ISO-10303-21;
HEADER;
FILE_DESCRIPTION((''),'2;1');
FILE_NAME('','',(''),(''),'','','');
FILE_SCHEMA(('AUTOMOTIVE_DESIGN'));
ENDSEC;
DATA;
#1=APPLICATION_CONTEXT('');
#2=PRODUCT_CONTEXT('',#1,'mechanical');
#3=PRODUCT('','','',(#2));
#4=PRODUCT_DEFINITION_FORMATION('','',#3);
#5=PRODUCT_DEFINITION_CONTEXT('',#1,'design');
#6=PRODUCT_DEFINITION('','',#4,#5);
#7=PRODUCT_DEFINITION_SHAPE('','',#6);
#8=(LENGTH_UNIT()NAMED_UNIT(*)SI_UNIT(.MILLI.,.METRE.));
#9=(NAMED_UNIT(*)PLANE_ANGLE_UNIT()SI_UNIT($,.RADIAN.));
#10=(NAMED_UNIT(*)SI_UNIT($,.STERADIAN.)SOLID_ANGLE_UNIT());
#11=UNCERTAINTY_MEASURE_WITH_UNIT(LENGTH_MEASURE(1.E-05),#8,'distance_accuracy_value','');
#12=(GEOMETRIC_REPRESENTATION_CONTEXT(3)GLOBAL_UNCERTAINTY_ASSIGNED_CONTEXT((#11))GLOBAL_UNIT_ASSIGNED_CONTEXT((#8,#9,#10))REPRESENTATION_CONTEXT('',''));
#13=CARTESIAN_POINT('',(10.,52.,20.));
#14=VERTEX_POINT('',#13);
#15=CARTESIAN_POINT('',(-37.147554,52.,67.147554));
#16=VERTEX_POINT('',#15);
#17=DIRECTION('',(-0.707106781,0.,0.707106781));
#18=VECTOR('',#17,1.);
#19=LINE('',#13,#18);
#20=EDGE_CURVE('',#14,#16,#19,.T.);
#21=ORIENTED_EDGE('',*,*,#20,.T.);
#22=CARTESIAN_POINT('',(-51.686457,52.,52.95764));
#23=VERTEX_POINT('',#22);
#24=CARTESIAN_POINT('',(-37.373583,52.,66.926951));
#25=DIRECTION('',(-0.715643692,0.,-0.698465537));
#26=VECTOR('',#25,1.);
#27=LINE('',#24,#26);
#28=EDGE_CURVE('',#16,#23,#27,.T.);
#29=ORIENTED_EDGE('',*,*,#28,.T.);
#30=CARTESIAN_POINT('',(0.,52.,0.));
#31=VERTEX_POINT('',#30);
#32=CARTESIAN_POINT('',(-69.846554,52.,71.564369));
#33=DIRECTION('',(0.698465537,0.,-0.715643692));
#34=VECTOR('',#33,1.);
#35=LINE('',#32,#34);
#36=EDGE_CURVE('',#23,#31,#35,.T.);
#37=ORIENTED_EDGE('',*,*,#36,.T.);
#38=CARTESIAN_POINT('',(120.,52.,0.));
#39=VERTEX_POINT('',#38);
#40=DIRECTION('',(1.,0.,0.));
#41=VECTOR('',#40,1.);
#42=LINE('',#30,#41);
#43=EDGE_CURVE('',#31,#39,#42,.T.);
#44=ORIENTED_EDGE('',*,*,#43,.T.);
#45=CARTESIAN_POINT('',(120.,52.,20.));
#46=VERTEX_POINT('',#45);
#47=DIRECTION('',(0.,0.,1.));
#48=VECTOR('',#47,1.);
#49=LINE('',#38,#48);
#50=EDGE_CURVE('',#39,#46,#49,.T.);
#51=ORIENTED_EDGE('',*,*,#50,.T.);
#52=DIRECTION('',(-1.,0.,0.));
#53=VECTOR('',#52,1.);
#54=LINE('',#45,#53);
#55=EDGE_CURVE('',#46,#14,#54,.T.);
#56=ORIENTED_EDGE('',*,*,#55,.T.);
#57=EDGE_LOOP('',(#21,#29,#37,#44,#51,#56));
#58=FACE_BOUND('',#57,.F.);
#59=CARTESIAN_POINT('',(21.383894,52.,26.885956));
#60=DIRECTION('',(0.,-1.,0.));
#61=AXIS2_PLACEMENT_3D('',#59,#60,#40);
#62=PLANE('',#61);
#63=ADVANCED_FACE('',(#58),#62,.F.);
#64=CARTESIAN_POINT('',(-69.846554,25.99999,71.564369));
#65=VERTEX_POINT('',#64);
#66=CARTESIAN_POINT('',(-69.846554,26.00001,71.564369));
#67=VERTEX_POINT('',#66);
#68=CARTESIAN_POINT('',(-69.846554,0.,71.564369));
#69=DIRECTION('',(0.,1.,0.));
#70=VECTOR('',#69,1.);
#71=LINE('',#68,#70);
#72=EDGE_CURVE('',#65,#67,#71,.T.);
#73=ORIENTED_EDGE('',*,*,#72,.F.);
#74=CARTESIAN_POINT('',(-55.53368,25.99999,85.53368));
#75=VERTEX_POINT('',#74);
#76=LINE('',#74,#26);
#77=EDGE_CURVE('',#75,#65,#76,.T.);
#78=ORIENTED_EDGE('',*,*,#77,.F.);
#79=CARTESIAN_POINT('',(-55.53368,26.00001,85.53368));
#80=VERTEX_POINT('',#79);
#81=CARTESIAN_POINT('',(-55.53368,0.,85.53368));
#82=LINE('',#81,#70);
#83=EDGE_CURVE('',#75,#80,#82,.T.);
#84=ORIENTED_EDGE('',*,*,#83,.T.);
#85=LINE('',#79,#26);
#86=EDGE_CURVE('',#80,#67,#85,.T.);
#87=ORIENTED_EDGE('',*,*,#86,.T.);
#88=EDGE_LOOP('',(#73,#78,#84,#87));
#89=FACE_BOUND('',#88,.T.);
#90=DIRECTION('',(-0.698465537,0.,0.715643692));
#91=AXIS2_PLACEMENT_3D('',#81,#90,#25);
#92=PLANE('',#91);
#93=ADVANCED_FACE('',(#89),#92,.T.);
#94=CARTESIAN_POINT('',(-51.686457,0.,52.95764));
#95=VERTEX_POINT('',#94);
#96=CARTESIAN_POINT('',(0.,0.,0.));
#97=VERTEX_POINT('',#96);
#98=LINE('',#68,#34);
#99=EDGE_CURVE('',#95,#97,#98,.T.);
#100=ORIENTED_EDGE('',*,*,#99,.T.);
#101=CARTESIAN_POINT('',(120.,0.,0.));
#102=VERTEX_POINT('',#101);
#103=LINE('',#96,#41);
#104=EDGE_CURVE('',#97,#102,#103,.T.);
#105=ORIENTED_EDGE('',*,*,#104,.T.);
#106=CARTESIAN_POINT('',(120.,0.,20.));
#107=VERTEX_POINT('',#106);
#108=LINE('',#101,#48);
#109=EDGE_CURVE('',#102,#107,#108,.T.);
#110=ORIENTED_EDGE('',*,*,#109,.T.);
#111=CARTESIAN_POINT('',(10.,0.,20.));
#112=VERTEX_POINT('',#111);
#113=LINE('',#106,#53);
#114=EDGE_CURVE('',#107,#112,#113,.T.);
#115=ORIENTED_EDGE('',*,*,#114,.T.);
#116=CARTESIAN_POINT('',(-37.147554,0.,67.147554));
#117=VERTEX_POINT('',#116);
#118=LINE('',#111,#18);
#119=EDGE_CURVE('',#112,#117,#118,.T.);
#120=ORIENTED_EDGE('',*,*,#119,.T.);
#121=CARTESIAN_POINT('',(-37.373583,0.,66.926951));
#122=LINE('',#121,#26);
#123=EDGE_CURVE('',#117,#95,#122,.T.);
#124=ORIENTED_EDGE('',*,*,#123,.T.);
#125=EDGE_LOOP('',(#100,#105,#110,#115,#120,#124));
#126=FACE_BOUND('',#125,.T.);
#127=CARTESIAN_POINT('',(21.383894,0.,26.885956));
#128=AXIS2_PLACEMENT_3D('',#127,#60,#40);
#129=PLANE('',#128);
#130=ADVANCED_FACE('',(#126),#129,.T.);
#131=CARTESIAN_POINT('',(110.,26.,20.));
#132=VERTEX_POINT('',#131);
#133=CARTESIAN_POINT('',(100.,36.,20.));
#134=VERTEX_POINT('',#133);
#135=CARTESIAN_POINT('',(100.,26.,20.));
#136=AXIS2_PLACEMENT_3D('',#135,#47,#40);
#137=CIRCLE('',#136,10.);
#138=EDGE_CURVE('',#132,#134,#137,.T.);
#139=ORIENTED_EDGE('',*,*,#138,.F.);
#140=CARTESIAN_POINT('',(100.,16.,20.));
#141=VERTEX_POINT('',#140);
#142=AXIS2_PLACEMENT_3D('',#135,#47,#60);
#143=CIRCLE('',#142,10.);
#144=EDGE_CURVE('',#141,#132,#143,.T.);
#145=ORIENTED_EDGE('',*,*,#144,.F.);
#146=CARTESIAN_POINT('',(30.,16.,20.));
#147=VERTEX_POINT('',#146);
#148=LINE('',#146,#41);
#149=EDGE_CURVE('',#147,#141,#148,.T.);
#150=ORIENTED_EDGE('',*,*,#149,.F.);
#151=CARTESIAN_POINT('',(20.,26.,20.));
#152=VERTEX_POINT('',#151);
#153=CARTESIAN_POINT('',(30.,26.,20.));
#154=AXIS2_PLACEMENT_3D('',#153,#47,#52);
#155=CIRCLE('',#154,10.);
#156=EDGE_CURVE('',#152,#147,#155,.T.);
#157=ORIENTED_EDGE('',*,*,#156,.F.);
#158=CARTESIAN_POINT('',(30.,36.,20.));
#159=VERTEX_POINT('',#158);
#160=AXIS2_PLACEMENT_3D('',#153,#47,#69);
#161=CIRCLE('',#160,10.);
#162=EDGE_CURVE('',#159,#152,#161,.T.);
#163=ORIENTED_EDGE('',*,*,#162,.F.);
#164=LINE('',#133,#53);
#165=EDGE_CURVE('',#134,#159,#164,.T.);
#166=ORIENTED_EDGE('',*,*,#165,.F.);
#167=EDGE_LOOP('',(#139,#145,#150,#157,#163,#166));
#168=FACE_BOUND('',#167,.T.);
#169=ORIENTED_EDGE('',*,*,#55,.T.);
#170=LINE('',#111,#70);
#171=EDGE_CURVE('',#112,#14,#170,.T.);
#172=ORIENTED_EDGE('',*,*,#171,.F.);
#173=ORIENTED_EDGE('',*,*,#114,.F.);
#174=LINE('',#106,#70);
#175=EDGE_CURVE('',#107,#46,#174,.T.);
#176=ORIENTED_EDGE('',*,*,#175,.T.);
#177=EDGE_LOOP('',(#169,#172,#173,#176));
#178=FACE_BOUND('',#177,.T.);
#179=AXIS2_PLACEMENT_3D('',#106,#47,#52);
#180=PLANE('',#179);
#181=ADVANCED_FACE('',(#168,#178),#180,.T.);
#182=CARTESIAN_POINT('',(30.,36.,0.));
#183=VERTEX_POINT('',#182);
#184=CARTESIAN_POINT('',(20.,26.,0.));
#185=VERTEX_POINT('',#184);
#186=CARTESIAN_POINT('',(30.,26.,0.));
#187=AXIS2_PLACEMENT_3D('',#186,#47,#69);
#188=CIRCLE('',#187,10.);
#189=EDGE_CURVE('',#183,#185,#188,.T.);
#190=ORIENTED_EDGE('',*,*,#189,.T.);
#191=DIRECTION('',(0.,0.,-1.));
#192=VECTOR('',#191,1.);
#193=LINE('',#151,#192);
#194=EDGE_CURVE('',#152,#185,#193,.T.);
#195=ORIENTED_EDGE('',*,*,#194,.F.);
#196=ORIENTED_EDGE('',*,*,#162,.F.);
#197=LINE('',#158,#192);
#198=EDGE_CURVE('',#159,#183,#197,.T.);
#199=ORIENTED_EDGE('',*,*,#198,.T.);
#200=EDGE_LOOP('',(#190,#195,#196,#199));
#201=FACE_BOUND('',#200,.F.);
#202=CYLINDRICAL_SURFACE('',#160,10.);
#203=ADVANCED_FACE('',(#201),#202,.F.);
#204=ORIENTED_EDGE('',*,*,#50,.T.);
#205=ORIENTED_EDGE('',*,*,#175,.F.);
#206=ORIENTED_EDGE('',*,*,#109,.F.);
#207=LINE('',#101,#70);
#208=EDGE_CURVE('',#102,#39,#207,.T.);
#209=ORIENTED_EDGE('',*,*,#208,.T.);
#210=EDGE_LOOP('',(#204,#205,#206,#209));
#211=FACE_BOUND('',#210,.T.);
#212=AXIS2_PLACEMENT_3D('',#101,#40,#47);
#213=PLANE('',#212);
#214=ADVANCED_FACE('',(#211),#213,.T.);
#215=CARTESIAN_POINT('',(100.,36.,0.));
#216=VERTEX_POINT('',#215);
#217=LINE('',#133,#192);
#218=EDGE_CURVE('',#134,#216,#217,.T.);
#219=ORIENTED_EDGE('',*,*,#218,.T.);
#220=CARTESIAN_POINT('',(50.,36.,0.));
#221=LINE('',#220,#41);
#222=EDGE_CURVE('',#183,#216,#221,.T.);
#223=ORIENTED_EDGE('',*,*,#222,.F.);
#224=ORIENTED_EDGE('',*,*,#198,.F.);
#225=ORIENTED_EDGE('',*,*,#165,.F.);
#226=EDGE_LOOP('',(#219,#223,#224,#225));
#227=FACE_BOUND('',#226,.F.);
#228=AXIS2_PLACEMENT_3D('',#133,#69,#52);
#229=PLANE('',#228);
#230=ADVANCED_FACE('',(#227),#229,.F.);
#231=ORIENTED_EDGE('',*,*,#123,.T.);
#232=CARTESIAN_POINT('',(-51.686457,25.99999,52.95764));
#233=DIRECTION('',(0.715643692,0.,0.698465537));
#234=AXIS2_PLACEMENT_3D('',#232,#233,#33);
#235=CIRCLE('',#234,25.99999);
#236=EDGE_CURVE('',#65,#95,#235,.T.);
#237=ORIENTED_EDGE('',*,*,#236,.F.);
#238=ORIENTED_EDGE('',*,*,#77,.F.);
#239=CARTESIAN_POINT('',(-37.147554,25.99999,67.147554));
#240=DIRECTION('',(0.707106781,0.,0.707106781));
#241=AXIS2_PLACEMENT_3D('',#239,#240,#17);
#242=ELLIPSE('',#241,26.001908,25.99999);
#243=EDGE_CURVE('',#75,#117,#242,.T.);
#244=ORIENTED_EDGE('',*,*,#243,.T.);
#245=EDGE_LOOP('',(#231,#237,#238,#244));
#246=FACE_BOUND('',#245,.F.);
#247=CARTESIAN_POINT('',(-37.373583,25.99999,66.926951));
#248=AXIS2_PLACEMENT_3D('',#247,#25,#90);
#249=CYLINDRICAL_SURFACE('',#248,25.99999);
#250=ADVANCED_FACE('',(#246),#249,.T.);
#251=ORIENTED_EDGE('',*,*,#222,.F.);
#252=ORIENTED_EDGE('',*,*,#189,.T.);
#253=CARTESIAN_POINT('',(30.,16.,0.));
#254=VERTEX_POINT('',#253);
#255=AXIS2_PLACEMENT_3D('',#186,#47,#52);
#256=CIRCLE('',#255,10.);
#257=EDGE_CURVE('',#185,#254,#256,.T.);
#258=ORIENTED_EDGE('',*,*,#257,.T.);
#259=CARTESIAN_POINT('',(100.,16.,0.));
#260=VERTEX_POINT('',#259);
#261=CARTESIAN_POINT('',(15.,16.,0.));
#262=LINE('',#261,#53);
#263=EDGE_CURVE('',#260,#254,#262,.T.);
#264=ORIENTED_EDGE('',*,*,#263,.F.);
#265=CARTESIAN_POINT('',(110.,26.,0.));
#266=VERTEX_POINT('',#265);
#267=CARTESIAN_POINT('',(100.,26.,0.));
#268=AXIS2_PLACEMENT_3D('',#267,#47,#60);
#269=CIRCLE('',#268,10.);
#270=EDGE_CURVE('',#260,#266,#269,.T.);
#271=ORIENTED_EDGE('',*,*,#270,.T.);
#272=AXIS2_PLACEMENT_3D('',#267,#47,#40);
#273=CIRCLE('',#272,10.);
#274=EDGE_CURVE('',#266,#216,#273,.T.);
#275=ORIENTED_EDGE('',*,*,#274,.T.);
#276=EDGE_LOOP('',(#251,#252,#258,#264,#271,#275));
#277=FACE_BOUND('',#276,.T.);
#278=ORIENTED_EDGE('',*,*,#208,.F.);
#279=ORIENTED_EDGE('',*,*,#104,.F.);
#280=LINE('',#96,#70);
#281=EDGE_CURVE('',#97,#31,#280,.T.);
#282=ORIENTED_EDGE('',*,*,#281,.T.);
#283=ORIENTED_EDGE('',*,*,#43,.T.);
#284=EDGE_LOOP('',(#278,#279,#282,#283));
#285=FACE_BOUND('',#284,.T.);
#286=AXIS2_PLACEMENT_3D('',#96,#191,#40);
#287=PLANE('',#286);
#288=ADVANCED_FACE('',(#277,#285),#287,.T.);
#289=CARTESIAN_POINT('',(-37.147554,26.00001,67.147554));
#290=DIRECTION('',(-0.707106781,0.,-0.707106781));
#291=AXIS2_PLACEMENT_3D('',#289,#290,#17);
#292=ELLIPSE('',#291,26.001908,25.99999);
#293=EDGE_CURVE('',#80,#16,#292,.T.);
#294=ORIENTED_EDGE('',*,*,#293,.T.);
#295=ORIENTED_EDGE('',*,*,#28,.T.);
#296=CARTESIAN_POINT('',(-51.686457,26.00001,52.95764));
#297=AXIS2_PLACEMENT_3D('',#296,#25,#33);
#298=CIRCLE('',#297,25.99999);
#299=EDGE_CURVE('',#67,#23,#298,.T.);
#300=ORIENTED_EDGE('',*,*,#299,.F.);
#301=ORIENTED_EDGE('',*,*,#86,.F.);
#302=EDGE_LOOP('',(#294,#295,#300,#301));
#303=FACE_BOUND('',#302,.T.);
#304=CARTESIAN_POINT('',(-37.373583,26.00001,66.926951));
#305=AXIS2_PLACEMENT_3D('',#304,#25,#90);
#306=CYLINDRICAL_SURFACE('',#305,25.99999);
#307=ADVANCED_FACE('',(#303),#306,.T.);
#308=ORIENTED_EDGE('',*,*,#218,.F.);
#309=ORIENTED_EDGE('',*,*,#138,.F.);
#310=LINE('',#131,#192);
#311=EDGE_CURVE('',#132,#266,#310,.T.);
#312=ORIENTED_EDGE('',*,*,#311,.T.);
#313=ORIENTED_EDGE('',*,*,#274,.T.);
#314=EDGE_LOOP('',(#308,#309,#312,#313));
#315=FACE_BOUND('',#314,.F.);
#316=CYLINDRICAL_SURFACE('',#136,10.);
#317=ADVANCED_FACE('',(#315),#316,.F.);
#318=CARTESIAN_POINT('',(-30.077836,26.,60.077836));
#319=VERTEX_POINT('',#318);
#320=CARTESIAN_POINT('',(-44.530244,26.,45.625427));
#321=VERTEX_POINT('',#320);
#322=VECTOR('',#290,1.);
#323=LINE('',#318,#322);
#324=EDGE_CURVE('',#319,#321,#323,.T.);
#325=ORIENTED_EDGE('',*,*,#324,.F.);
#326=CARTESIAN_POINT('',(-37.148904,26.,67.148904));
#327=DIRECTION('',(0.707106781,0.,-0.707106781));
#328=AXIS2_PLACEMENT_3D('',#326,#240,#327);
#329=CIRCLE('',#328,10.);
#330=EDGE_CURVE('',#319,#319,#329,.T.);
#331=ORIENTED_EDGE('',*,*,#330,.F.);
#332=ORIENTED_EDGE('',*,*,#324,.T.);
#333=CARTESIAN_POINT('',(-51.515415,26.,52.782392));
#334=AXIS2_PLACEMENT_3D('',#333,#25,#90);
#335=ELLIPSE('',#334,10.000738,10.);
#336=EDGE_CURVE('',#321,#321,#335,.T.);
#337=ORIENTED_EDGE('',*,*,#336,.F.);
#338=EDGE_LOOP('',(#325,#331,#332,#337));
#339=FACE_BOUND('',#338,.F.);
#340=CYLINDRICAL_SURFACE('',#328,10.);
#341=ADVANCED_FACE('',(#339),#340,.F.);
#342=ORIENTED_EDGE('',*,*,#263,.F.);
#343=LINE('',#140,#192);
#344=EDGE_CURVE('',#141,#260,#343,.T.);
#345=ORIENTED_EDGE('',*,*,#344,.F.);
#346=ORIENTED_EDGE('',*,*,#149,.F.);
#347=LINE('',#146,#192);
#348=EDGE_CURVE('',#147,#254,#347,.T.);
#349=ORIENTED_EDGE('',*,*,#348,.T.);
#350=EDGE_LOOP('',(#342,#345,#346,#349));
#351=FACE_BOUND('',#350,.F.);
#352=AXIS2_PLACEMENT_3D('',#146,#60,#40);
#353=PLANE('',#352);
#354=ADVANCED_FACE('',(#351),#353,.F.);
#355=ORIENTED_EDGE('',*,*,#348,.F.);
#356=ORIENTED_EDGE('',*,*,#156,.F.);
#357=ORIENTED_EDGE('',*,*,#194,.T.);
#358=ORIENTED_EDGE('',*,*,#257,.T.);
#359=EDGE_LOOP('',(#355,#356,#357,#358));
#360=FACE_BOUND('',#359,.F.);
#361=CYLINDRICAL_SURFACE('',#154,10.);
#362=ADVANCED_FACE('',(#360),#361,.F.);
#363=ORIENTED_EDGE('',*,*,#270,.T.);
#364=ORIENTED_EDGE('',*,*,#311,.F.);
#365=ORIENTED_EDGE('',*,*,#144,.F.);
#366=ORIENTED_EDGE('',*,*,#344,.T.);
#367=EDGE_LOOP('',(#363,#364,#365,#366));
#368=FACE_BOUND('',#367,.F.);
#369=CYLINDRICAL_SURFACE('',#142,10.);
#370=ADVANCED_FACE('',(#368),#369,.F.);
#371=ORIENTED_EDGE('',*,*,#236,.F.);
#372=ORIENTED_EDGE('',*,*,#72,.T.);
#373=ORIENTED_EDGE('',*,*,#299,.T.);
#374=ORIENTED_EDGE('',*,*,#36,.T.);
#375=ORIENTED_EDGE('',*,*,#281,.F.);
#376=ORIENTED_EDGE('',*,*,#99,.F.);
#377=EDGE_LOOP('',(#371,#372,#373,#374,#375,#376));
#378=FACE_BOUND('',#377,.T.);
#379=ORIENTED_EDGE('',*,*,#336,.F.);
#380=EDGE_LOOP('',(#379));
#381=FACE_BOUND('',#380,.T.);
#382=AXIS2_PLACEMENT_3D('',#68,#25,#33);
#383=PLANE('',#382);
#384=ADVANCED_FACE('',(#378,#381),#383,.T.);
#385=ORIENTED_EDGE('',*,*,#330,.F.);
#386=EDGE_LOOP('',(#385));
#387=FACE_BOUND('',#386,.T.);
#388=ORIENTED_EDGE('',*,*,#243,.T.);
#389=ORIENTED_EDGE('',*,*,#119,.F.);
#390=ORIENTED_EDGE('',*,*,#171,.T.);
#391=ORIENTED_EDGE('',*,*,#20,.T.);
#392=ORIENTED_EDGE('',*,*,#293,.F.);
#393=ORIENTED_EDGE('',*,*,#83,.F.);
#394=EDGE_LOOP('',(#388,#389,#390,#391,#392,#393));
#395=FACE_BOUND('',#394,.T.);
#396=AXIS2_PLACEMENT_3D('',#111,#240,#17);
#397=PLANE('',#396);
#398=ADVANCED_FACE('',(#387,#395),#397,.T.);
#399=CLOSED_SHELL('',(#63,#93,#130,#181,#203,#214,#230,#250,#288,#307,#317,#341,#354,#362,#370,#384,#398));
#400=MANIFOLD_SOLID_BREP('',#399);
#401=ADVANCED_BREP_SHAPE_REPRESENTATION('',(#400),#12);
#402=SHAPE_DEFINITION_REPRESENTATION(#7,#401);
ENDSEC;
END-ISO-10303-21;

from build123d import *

# Parameters (mm, degrees)
F1_DEPTH = 52
F2_R     = 10
F3_DEPTH = 21
F5_DEPTH = 21
F6_R     = 25.99999


# Not quite as in the source:
# - a fillet or chamfer is up to 0.001 mm smaller than in the source, because OpenCascade refuses the exact size


with BuildPart() as f1:
    # F0 (on Front) → F1 (new body)
    with BuildSketch(Plane.XZ):
        Polygon((-69.8465537288, 71.5643691526), (0, 0), (120, 0), (120, 20), (10, 20), (-55.5336798983, 85.5336798983), align=None)
    extrude(amount=-F1_DEPTH)

    # F2 (on face) → F3 (cut)
    with BuildSketch(Plane(origin=(15, 0, 15), x_dir=(0.7071067812, 0, -0.7071067812), z_dir=(0.7071067812, 0, 0.7071067812))):
        with Locations((-73.7496867163, 26)):
            Circle(F2_R)
    extrude(amount=-F3_DEPTH, mode=Mode.SUBTRACT)

    # F4 (on face) → F5 (cut)
    with BuildSketch(Plane.XY.offset(20)):
        with BuildLine():
            ThreePointArc((20, 26), (22.9289321881, 18.9289321881), (30, 16))
            Line((30, 16), (100, 16))
            ThreePointArc((100, 16), (107.0710678119, 18.9289321881), (110, 26))
            ThreePointArc((110, 26), (107.0710678119, 33.0710678119), (100, 36))
            Line((100, 36), (30, 36))
            ThreePointArc((30, 36), (22.9289321881, 33.0710678119), (20, 26))
        make_face()
    extrude(amount=-F5_DEPTH, mode=Mode.SUBTRACT)

    # F6 (radius 26 in the source; OpenCascade refuses exactly that, so slightly less here)
    f6_edges = [f1.edges().sort_by_distance(p)[0] for p in [
        (-62.690117, 0, 78.549025),
        (-62.690117, 52, 78.549025),
    ]]
    fillet(f6_edges, radius=F6_R)


solid = f1.part
